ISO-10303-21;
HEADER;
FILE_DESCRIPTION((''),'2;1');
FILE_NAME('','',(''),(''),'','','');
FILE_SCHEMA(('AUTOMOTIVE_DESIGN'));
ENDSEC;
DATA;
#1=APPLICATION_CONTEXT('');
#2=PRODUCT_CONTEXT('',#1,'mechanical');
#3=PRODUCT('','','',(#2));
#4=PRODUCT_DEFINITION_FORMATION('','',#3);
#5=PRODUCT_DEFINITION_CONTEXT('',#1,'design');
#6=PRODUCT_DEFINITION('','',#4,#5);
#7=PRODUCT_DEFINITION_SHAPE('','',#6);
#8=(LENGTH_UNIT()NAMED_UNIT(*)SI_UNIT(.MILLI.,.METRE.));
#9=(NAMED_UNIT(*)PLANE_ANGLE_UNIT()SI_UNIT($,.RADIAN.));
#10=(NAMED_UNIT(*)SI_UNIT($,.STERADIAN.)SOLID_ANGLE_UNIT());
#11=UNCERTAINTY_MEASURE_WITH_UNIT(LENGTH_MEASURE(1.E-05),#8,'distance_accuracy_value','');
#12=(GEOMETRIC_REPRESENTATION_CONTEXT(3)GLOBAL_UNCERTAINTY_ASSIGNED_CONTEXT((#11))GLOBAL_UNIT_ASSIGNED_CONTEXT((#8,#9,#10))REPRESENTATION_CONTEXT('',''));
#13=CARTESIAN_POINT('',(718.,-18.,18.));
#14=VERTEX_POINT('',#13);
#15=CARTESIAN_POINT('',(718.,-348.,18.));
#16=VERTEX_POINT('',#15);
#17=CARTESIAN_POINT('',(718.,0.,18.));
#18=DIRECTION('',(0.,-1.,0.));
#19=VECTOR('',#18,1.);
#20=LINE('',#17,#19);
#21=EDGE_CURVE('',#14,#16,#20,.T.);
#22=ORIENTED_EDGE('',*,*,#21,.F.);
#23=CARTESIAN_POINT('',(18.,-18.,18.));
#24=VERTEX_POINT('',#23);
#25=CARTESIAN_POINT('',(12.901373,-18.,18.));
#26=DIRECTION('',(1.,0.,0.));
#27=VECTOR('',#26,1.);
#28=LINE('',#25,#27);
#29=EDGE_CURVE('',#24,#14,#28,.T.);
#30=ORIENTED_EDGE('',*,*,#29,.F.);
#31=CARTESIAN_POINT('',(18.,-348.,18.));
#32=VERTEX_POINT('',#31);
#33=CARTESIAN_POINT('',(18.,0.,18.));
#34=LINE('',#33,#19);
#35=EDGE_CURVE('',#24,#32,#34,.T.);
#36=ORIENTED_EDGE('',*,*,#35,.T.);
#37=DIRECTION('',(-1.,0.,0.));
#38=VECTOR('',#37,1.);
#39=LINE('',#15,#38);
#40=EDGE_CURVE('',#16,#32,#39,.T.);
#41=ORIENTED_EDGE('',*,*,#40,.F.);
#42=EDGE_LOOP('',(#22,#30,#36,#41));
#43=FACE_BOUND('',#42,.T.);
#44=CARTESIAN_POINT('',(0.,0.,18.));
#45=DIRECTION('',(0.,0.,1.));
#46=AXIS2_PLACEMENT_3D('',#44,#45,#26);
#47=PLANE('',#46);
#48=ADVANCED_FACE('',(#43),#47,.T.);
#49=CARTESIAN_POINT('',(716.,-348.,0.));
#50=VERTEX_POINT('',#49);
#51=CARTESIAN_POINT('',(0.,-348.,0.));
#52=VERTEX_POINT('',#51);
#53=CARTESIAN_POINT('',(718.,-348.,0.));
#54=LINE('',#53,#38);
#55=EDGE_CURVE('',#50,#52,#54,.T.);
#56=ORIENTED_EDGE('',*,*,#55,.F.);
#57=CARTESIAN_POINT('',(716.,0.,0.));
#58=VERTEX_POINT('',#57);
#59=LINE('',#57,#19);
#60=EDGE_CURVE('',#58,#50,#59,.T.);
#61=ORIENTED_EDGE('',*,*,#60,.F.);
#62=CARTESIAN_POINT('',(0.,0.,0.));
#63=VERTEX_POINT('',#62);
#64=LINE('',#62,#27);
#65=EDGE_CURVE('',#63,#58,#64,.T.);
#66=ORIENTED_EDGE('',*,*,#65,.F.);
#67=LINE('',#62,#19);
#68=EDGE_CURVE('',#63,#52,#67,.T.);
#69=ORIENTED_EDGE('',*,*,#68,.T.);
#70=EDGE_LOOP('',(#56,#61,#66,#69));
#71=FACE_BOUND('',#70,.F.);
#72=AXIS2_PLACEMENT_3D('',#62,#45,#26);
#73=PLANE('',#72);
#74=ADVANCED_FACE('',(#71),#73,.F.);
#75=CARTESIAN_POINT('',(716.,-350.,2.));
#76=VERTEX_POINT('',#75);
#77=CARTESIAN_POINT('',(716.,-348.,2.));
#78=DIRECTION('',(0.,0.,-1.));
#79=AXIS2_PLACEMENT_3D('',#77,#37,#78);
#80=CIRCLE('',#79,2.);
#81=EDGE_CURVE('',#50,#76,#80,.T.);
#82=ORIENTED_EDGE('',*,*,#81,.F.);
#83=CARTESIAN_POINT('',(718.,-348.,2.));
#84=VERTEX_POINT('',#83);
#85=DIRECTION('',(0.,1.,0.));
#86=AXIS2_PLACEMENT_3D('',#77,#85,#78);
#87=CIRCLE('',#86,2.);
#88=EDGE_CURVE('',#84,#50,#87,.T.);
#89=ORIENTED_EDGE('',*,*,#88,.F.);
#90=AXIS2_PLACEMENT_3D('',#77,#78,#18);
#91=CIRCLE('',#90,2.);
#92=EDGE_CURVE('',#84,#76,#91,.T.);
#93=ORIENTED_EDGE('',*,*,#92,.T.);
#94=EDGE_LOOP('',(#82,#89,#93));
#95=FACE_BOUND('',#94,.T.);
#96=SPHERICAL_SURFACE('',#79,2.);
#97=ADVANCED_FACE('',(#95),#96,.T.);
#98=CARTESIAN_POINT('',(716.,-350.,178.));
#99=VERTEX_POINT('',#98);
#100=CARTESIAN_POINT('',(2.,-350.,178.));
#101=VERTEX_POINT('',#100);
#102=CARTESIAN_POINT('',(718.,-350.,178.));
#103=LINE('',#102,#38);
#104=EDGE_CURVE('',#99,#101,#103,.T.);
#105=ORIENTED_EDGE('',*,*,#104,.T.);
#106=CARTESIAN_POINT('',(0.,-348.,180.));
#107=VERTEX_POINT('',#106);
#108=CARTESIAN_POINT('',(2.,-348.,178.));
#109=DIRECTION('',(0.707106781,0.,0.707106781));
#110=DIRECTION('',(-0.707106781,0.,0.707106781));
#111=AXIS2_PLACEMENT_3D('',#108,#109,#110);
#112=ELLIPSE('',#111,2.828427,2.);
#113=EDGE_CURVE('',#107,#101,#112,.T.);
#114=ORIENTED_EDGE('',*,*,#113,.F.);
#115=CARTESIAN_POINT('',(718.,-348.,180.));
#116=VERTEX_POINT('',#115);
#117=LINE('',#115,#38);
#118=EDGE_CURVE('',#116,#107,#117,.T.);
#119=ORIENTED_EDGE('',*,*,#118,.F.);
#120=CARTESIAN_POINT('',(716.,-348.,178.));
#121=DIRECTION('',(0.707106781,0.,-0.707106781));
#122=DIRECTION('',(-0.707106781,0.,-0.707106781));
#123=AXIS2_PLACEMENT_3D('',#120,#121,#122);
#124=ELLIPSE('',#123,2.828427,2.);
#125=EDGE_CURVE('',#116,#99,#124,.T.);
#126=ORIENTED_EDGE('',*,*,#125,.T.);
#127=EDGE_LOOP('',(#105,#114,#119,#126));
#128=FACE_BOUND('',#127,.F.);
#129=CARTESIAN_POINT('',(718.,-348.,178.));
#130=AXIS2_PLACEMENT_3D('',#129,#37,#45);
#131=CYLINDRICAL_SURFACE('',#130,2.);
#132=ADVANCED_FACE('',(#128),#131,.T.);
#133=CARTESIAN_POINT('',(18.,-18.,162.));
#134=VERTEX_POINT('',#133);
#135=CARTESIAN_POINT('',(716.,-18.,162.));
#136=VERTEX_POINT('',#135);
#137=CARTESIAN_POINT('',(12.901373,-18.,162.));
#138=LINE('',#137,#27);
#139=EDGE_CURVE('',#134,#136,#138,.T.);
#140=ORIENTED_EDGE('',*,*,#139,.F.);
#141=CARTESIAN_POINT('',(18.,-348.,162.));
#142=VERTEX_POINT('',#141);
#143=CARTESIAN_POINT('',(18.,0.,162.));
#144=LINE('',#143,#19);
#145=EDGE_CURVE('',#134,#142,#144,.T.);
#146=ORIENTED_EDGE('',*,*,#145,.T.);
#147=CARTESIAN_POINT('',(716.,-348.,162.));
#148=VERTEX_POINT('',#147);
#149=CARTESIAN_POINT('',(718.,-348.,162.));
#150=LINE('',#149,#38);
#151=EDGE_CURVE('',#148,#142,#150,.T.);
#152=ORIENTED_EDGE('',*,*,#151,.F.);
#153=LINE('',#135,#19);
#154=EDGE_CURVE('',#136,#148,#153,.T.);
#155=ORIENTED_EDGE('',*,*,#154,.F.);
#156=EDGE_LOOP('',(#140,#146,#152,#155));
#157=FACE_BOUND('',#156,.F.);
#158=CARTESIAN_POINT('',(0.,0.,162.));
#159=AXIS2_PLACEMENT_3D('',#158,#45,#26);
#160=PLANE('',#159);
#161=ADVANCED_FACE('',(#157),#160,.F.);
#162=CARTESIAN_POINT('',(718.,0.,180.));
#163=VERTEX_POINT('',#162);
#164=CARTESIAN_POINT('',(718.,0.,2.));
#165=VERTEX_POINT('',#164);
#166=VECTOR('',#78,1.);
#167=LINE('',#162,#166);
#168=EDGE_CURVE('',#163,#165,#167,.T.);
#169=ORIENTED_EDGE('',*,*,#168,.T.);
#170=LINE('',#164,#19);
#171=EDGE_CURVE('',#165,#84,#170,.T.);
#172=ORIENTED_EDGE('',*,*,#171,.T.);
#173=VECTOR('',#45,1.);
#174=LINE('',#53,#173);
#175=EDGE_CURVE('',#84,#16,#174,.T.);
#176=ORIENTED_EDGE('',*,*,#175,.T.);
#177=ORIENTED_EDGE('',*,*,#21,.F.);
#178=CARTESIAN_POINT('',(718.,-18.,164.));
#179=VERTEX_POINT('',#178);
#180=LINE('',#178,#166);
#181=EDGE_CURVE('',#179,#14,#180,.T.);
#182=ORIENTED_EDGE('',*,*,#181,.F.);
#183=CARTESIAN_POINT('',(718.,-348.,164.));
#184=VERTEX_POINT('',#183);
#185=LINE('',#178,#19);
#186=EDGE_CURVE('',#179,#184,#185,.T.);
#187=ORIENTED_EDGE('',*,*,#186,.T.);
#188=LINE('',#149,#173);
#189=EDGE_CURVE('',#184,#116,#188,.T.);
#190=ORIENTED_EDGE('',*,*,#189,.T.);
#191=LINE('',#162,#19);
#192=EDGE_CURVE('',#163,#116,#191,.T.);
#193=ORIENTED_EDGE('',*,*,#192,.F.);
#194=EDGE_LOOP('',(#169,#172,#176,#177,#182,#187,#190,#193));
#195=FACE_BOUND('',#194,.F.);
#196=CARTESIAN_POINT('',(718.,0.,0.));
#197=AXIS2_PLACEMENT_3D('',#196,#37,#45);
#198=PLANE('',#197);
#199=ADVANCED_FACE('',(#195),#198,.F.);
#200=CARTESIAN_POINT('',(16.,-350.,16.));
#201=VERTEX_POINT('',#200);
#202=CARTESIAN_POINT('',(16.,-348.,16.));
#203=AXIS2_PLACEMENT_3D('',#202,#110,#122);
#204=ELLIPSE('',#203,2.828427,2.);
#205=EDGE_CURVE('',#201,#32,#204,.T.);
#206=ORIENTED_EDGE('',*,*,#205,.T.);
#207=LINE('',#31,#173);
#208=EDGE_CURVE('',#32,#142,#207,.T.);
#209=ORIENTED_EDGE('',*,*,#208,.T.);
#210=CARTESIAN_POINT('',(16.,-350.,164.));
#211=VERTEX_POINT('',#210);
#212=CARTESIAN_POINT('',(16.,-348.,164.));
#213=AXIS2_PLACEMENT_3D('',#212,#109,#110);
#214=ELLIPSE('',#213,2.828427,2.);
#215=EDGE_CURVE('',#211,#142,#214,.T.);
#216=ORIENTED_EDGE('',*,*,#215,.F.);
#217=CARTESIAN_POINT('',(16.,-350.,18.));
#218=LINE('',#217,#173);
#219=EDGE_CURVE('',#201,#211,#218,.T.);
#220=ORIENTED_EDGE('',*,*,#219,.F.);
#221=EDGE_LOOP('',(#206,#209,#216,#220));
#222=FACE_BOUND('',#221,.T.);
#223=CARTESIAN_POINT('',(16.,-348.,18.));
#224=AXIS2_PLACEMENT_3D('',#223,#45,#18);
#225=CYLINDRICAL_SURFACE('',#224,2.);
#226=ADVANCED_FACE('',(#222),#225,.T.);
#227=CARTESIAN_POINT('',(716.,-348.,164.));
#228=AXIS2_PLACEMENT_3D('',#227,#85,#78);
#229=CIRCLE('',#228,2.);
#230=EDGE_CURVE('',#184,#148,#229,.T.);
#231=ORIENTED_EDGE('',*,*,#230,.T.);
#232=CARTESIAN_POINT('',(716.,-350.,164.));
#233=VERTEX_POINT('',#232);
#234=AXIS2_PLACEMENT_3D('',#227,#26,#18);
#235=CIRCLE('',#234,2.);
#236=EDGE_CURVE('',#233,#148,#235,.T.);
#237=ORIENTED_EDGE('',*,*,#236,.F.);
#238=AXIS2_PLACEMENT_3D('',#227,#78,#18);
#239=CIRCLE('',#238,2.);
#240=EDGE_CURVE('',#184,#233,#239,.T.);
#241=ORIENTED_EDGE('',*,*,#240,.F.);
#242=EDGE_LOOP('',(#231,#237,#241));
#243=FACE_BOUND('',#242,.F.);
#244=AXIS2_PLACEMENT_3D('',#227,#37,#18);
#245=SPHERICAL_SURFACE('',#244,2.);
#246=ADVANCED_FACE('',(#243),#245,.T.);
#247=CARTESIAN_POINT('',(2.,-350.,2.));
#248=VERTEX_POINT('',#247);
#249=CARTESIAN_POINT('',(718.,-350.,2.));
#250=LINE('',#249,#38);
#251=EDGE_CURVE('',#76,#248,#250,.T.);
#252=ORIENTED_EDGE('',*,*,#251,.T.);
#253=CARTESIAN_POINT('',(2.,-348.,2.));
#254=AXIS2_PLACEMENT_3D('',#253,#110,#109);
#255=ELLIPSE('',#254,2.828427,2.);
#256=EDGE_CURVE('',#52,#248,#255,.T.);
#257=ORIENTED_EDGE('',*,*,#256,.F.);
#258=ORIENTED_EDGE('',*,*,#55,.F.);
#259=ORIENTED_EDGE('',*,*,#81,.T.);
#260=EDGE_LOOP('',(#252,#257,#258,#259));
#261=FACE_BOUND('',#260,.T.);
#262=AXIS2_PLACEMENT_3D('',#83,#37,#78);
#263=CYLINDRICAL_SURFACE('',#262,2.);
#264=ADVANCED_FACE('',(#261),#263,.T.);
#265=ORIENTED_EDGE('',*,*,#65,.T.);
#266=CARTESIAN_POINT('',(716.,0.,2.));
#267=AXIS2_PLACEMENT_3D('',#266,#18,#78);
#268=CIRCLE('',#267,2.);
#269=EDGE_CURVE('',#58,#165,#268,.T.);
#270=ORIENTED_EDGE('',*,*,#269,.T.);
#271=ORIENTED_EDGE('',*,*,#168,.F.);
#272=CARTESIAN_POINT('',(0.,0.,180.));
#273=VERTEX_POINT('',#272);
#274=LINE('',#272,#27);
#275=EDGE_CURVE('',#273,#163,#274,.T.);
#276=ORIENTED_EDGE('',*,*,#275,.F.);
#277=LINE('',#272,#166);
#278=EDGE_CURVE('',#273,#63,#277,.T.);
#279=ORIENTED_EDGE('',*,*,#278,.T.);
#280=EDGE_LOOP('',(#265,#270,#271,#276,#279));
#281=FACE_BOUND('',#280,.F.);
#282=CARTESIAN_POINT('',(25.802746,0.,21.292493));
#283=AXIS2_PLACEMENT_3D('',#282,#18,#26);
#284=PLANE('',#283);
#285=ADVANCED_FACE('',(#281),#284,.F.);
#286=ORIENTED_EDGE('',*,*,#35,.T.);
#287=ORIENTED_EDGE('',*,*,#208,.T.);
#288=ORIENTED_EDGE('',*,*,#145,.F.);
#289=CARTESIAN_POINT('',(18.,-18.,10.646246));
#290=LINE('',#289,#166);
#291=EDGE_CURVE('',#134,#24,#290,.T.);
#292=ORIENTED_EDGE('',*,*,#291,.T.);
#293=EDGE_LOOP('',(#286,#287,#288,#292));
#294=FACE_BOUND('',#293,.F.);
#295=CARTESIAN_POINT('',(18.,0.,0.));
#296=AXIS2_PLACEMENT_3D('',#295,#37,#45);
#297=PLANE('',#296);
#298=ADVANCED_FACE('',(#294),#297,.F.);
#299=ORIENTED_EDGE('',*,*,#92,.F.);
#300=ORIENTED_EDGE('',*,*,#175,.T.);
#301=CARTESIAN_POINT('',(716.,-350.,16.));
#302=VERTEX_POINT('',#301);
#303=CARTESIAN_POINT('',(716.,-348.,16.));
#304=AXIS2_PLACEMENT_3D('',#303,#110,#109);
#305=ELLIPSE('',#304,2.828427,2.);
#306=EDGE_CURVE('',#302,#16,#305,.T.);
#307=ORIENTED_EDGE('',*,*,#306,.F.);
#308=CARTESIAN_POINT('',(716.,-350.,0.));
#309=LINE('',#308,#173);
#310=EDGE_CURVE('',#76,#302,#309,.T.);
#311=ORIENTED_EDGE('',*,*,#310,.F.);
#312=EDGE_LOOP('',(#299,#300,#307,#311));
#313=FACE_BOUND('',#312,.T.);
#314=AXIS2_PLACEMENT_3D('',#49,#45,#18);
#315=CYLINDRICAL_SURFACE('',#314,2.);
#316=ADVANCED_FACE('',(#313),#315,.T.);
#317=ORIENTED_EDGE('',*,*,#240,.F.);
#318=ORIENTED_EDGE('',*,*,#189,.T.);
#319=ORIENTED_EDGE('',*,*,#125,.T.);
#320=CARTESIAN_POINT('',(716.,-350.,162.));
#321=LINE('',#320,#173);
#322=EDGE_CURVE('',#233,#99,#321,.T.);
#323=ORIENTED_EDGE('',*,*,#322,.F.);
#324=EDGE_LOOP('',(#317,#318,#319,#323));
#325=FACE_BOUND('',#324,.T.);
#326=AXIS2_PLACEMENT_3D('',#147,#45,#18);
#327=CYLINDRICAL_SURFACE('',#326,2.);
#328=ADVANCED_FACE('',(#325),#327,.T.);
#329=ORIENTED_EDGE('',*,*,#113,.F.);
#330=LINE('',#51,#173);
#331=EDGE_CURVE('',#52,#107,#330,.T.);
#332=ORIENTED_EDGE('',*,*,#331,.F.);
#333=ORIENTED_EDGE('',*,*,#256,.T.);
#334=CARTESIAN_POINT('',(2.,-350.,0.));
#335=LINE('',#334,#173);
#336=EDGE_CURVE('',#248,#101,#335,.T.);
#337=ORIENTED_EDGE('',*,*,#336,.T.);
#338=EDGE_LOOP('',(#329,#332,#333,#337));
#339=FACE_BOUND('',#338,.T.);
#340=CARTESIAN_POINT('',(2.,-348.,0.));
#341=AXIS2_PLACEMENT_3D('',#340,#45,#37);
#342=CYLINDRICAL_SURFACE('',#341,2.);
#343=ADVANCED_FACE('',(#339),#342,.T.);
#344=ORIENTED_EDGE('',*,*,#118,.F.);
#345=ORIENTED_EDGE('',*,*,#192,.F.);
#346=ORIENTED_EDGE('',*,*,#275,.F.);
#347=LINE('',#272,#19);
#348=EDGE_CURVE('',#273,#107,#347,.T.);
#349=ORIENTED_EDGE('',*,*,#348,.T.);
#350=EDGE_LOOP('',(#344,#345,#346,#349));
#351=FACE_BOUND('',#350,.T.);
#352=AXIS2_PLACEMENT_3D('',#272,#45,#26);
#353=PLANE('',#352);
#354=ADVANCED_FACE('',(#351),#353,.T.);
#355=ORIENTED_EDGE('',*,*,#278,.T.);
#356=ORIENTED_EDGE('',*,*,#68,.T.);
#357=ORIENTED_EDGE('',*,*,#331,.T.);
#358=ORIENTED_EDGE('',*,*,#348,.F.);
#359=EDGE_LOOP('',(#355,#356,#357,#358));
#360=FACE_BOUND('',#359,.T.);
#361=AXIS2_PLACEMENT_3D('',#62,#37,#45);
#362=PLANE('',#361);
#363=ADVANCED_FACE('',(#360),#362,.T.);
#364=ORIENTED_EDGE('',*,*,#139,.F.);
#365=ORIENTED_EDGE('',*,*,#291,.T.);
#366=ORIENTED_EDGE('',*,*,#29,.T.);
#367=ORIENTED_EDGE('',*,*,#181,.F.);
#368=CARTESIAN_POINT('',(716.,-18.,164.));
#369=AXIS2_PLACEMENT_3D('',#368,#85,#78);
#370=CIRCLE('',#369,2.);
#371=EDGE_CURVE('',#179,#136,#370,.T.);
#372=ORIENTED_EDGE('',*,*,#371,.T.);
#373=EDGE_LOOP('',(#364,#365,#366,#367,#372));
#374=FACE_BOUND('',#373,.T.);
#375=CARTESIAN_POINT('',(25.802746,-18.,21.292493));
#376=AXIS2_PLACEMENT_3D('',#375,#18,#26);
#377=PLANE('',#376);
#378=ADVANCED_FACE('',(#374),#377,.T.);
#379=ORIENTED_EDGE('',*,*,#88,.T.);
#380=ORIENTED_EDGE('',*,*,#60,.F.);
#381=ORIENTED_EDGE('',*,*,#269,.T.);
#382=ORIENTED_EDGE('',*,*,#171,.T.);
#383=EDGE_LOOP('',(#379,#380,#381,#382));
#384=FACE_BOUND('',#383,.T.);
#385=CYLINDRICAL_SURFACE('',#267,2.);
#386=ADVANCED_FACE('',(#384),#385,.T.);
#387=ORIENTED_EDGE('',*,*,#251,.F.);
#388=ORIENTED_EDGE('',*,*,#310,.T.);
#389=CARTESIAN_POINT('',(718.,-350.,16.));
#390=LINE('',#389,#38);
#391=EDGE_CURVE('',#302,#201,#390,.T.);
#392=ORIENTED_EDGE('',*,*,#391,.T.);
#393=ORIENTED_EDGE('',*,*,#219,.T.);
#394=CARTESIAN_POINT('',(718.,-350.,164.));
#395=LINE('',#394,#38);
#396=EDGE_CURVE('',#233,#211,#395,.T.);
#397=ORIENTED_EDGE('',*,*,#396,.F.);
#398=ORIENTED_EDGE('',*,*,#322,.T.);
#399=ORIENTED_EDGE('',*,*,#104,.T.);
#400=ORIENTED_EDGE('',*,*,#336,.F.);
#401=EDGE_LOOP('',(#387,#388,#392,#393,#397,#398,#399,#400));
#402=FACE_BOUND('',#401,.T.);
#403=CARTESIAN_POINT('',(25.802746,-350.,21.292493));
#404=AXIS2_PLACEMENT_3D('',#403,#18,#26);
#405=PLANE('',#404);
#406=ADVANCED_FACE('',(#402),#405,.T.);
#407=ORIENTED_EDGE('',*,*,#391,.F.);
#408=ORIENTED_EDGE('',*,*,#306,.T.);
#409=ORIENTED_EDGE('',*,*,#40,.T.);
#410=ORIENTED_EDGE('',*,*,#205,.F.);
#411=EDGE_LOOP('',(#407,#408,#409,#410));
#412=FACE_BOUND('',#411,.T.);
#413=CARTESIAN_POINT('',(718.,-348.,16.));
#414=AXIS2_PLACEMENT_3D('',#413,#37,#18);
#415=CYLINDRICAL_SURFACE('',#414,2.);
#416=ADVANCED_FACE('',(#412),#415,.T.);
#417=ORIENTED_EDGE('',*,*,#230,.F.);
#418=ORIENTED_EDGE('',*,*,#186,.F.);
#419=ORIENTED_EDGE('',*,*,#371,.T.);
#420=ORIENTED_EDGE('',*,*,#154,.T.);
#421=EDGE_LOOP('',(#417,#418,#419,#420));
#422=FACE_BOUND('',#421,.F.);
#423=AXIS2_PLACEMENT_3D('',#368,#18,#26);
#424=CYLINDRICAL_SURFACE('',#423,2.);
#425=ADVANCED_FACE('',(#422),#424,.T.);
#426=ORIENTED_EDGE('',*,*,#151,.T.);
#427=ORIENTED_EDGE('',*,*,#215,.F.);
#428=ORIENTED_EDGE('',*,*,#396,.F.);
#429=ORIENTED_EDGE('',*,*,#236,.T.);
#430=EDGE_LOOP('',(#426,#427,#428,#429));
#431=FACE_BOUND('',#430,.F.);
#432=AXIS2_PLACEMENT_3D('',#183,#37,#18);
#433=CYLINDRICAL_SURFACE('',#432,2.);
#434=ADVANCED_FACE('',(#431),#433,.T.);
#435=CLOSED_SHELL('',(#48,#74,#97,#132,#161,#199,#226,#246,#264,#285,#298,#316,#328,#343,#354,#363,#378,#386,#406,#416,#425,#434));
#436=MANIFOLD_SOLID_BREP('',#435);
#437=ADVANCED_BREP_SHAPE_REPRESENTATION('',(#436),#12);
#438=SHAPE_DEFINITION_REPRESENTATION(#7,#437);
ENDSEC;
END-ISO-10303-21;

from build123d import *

# Parameters (mm, degrees)
F0_W     = 51.6054928303
F0_H     = 42.5849854946
F1_DEPTH = 350
F2_DEPTH = 718
F3_DEPTH = 180
F4_T     = -18
F5_R     = 2


# Not quite as in the source:
# - two fillets or chamfers of one size are made in one step


with BuildPart() as f1:
    # F0 (on Front) → F1 (new body)
    with BuildSketch(Plane.XZ):
        with Locations((25.8027464151, 21.2924927473)):
            Rectangle(F0_W, F0_H)
    extrude(amount=F1_DEPTH)

    # F2 (add): a face of the model
    f2_faces = [f1.faces().sort_by_distance(p)[0] for p in [
        (0, -175, 21.2924927473),
    ]]
    extrude(f2_faces, amount=-F2_DEPTH)

    # F3 (add): a face of the model
    f3_faces = [f1.faces().sort_by_distance(p)[0] for p in [
        (359, -175, 0),
    ]]
    extrude(f3_faces, amount=-F3_DEPTH)

    # F4
    f4_openings = [f1.faces().sort_by_distance(p)[0] for p in [
        (359, -350, 90),
        (718, -175, 90),
    ]]
    offset(amount=F4_T, openings=f4_openings)

    # F5
    f5_edges = [f1.edges().sort_by_distance(p)[0] for p in [
        (359, -350, 180),
        (0, -350, 90),
        (359, -350, 0),
        (718, -175, 0),
        (718, -350, 9),
        (368, -350, 18),
        (18, -350, 90),
        (368, -350, 162),
        (718, -350, 171),
        (718, -184, 162),
    ]]
    fillet(f5_edges, radius=F5_R)


solid = f1.part
